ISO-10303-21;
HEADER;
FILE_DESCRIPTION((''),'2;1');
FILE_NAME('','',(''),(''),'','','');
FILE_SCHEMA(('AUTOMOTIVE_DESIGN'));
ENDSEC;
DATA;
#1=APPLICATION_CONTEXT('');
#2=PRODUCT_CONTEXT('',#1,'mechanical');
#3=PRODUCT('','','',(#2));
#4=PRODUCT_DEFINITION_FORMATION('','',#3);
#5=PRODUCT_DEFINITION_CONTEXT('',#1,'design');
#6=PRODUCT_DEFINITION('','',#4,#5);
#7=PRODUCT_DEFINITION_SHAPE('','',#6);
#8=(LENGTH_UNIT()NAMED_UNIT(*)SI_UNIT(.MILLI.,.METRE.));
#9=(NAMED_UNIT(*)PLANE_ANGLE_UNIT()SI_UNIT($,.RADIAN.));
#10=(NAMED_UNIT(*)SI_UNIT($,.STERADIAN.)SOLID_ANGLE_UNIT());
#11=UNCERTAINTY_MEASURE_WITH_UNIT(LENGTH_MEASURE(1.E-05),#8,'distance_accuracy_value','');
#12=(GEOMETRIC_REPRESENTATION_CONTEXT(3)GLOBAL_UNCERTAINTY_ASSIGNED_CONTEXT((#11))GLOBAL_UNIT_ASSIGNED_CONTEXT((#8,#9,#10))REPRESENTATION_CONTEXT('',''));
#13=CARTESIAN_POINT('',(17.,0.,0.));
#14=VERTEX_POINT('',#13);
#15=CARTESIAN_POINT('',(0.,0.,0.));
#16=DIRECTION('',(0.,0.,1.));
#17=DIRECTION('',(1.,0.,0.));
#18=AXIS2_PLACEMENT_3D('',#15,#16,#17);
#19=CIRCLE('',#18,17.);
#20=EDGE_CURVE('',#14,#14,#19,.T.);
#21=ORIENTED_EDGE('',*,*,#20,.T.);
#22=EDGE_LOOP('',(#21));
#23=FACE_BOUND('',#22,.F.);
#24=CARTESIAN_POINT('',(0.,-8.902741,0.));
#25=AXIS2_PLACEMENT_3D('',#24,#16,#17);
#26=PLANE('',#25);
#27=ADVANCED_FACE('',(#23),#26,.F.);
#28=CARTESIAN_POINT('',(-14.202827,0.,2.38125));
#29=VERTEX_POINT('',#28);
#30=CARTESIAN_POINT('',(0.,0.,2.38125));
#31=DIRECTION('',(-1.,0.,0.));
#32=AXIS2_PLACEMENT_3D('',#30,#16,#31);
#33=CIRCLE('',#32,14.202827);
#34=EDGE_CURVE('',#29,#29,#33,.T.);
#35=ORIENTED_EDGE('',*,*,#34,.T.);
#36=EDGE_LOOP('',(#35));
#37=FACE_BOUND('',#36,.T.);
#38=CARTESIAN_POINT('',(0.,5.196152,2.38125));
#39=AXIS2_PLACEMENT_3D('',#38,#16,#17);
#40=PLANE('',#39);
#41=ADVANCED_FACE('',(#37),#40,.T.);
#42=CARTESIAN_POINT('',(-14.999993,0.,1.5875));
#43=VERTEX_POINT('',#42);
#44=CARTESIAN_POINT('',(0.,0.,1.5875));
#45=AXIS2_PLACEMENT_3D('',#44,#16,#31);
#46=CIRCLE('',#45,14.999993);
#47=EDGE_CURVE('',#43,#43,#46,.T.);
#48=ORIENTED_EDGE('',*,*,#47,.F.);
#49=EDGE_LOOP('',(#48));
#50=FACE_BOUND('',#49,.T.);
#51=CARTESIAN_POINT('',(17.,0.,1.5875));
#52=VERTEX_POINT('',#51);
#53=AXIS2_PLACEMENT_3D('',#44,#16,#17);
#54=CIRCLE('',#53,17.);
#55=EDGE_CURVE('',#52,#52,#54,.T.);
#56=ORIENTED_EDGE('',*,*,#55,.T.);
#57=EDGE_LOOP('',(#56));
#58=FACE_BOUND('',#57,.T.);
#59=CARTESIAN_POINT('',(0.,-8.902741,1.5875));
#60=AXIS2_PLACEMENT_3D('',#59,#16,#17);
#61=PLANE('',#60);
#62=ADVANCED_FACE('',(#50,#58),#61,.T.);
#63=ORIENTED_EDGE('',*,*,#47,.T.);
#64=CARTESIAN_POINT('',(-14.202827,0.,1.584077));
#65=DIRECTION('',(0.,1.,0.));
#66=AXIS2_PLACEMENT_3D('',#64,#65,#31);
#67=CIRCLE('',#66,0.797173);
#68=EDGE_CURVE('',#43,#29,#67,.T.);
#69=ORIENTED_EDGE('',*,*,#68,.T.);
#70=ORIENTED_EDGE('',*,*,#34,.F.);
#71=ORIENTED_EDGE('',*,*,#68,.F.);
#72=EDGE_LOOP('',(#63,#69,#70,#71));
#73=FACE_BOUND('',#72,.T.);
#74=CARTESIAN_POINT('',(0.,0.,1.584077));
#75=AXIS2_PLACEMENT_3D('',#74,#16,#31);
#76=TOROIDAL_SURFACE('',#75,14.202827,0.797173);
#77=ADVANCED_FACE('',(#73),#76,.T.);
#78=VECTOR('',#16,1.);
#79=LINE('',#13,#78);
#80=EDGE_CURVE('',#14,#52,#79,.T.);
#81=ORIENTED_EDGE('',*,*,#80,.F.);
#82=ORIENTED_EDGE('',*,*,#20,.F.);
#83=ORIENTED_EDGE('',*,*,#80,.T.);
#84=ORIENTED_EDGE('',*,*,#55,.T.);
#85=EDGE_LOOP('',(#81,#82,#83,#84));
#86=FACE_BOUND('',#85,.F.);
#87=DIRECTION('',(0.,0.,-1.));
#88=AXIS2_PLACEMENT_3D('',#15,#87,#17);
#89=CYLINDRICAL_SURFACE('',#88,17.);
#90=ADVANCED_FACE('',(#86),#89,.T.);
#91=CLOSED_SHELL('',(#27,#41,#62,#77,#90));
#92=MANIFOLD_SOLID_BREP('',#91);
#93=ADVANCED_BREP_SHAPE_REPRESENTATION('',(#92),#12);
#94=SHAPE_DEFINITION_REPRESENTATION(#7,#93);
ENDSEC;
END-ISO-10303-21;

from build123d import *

# Parameters (mm, degrees)
F3_DEPTH = 2.38125
F4_DEPTH = 1.5875


# Not quite as in the source:
# - a fillet or chamfer that OpenCascade refuses, or shapes differently, is made with other operations: its cross-section is extruded or revolved along the edge and cut away or added


with BuildPart() as f3:
    # F2 (on Top) → F3 (new body)
    with BuildSketch(Plane.XY):
        with BuildLine():
            Line((-15, 0), (15, 0))
            ThreePointArc((15, 0), (0, 15), (-15, 0))
        make_face()
        with BuildLine():
            ThreePointArc((-15, 0), (0, -15), (15, 0))
            Line((15, 0), (-15, 0))
        make_face()
    extrude(amount=F3_DEPTH)

    # F2 (on Top) → F4 (join)
    with BuildSketch(Plane.XY):
        with BuildLine():
            Line((17, 0), (15, 0))
            ThreePointArc((15, 0), (0, -15), (-15, 0))
            Line((-15, 0), (-17, 0))
            ThreePointArc((-17, 0), (0, -17), (17, 0))
        make_face()
        with BuildLine():
            ThreePointArc((-15, 0), (0, 15), (15, 0))
            Line((15, 0), (17, 0))
            ThreePointArc((17, 0), (0, 17), (-17, 0))
            Line((-17, 0), (-15, 0))
        make_face()
    extrude(amount=F4_DEPTH)

    # F5: fillet of radius 0.7971733183 on 1 edges, made by hand


with BuildPart() as f5_tool2:
    # F5_s3 → F5_t4 (revolve)
    with BuildSketch(Plane.XZ):
        with BuildLine():
            ThreePointArc((-15, 1.5840766817), (-14.7665133409, 2.1477633409), (-14.2028266817, 2.38125))
            Line((-14.2028266817, 2.38125), (-15, 2.38125))
            Line((-15, 2.38125), (-15, 1.5840766817))
        make_face()
    revolve(axis=Axis((0, 0, 2.38125), (0, 0, 1)))

    split(bisect_by=Plane.XY.offset(1.5875), keep=Keep.TOP)


with BuildPart() as f3_1:
    add(f3.part)

    # F5_t1: cut F5_tool2
    add(f5_tool2.part, mode=Mode.SUBTRACT)


solid = f3_1.part
